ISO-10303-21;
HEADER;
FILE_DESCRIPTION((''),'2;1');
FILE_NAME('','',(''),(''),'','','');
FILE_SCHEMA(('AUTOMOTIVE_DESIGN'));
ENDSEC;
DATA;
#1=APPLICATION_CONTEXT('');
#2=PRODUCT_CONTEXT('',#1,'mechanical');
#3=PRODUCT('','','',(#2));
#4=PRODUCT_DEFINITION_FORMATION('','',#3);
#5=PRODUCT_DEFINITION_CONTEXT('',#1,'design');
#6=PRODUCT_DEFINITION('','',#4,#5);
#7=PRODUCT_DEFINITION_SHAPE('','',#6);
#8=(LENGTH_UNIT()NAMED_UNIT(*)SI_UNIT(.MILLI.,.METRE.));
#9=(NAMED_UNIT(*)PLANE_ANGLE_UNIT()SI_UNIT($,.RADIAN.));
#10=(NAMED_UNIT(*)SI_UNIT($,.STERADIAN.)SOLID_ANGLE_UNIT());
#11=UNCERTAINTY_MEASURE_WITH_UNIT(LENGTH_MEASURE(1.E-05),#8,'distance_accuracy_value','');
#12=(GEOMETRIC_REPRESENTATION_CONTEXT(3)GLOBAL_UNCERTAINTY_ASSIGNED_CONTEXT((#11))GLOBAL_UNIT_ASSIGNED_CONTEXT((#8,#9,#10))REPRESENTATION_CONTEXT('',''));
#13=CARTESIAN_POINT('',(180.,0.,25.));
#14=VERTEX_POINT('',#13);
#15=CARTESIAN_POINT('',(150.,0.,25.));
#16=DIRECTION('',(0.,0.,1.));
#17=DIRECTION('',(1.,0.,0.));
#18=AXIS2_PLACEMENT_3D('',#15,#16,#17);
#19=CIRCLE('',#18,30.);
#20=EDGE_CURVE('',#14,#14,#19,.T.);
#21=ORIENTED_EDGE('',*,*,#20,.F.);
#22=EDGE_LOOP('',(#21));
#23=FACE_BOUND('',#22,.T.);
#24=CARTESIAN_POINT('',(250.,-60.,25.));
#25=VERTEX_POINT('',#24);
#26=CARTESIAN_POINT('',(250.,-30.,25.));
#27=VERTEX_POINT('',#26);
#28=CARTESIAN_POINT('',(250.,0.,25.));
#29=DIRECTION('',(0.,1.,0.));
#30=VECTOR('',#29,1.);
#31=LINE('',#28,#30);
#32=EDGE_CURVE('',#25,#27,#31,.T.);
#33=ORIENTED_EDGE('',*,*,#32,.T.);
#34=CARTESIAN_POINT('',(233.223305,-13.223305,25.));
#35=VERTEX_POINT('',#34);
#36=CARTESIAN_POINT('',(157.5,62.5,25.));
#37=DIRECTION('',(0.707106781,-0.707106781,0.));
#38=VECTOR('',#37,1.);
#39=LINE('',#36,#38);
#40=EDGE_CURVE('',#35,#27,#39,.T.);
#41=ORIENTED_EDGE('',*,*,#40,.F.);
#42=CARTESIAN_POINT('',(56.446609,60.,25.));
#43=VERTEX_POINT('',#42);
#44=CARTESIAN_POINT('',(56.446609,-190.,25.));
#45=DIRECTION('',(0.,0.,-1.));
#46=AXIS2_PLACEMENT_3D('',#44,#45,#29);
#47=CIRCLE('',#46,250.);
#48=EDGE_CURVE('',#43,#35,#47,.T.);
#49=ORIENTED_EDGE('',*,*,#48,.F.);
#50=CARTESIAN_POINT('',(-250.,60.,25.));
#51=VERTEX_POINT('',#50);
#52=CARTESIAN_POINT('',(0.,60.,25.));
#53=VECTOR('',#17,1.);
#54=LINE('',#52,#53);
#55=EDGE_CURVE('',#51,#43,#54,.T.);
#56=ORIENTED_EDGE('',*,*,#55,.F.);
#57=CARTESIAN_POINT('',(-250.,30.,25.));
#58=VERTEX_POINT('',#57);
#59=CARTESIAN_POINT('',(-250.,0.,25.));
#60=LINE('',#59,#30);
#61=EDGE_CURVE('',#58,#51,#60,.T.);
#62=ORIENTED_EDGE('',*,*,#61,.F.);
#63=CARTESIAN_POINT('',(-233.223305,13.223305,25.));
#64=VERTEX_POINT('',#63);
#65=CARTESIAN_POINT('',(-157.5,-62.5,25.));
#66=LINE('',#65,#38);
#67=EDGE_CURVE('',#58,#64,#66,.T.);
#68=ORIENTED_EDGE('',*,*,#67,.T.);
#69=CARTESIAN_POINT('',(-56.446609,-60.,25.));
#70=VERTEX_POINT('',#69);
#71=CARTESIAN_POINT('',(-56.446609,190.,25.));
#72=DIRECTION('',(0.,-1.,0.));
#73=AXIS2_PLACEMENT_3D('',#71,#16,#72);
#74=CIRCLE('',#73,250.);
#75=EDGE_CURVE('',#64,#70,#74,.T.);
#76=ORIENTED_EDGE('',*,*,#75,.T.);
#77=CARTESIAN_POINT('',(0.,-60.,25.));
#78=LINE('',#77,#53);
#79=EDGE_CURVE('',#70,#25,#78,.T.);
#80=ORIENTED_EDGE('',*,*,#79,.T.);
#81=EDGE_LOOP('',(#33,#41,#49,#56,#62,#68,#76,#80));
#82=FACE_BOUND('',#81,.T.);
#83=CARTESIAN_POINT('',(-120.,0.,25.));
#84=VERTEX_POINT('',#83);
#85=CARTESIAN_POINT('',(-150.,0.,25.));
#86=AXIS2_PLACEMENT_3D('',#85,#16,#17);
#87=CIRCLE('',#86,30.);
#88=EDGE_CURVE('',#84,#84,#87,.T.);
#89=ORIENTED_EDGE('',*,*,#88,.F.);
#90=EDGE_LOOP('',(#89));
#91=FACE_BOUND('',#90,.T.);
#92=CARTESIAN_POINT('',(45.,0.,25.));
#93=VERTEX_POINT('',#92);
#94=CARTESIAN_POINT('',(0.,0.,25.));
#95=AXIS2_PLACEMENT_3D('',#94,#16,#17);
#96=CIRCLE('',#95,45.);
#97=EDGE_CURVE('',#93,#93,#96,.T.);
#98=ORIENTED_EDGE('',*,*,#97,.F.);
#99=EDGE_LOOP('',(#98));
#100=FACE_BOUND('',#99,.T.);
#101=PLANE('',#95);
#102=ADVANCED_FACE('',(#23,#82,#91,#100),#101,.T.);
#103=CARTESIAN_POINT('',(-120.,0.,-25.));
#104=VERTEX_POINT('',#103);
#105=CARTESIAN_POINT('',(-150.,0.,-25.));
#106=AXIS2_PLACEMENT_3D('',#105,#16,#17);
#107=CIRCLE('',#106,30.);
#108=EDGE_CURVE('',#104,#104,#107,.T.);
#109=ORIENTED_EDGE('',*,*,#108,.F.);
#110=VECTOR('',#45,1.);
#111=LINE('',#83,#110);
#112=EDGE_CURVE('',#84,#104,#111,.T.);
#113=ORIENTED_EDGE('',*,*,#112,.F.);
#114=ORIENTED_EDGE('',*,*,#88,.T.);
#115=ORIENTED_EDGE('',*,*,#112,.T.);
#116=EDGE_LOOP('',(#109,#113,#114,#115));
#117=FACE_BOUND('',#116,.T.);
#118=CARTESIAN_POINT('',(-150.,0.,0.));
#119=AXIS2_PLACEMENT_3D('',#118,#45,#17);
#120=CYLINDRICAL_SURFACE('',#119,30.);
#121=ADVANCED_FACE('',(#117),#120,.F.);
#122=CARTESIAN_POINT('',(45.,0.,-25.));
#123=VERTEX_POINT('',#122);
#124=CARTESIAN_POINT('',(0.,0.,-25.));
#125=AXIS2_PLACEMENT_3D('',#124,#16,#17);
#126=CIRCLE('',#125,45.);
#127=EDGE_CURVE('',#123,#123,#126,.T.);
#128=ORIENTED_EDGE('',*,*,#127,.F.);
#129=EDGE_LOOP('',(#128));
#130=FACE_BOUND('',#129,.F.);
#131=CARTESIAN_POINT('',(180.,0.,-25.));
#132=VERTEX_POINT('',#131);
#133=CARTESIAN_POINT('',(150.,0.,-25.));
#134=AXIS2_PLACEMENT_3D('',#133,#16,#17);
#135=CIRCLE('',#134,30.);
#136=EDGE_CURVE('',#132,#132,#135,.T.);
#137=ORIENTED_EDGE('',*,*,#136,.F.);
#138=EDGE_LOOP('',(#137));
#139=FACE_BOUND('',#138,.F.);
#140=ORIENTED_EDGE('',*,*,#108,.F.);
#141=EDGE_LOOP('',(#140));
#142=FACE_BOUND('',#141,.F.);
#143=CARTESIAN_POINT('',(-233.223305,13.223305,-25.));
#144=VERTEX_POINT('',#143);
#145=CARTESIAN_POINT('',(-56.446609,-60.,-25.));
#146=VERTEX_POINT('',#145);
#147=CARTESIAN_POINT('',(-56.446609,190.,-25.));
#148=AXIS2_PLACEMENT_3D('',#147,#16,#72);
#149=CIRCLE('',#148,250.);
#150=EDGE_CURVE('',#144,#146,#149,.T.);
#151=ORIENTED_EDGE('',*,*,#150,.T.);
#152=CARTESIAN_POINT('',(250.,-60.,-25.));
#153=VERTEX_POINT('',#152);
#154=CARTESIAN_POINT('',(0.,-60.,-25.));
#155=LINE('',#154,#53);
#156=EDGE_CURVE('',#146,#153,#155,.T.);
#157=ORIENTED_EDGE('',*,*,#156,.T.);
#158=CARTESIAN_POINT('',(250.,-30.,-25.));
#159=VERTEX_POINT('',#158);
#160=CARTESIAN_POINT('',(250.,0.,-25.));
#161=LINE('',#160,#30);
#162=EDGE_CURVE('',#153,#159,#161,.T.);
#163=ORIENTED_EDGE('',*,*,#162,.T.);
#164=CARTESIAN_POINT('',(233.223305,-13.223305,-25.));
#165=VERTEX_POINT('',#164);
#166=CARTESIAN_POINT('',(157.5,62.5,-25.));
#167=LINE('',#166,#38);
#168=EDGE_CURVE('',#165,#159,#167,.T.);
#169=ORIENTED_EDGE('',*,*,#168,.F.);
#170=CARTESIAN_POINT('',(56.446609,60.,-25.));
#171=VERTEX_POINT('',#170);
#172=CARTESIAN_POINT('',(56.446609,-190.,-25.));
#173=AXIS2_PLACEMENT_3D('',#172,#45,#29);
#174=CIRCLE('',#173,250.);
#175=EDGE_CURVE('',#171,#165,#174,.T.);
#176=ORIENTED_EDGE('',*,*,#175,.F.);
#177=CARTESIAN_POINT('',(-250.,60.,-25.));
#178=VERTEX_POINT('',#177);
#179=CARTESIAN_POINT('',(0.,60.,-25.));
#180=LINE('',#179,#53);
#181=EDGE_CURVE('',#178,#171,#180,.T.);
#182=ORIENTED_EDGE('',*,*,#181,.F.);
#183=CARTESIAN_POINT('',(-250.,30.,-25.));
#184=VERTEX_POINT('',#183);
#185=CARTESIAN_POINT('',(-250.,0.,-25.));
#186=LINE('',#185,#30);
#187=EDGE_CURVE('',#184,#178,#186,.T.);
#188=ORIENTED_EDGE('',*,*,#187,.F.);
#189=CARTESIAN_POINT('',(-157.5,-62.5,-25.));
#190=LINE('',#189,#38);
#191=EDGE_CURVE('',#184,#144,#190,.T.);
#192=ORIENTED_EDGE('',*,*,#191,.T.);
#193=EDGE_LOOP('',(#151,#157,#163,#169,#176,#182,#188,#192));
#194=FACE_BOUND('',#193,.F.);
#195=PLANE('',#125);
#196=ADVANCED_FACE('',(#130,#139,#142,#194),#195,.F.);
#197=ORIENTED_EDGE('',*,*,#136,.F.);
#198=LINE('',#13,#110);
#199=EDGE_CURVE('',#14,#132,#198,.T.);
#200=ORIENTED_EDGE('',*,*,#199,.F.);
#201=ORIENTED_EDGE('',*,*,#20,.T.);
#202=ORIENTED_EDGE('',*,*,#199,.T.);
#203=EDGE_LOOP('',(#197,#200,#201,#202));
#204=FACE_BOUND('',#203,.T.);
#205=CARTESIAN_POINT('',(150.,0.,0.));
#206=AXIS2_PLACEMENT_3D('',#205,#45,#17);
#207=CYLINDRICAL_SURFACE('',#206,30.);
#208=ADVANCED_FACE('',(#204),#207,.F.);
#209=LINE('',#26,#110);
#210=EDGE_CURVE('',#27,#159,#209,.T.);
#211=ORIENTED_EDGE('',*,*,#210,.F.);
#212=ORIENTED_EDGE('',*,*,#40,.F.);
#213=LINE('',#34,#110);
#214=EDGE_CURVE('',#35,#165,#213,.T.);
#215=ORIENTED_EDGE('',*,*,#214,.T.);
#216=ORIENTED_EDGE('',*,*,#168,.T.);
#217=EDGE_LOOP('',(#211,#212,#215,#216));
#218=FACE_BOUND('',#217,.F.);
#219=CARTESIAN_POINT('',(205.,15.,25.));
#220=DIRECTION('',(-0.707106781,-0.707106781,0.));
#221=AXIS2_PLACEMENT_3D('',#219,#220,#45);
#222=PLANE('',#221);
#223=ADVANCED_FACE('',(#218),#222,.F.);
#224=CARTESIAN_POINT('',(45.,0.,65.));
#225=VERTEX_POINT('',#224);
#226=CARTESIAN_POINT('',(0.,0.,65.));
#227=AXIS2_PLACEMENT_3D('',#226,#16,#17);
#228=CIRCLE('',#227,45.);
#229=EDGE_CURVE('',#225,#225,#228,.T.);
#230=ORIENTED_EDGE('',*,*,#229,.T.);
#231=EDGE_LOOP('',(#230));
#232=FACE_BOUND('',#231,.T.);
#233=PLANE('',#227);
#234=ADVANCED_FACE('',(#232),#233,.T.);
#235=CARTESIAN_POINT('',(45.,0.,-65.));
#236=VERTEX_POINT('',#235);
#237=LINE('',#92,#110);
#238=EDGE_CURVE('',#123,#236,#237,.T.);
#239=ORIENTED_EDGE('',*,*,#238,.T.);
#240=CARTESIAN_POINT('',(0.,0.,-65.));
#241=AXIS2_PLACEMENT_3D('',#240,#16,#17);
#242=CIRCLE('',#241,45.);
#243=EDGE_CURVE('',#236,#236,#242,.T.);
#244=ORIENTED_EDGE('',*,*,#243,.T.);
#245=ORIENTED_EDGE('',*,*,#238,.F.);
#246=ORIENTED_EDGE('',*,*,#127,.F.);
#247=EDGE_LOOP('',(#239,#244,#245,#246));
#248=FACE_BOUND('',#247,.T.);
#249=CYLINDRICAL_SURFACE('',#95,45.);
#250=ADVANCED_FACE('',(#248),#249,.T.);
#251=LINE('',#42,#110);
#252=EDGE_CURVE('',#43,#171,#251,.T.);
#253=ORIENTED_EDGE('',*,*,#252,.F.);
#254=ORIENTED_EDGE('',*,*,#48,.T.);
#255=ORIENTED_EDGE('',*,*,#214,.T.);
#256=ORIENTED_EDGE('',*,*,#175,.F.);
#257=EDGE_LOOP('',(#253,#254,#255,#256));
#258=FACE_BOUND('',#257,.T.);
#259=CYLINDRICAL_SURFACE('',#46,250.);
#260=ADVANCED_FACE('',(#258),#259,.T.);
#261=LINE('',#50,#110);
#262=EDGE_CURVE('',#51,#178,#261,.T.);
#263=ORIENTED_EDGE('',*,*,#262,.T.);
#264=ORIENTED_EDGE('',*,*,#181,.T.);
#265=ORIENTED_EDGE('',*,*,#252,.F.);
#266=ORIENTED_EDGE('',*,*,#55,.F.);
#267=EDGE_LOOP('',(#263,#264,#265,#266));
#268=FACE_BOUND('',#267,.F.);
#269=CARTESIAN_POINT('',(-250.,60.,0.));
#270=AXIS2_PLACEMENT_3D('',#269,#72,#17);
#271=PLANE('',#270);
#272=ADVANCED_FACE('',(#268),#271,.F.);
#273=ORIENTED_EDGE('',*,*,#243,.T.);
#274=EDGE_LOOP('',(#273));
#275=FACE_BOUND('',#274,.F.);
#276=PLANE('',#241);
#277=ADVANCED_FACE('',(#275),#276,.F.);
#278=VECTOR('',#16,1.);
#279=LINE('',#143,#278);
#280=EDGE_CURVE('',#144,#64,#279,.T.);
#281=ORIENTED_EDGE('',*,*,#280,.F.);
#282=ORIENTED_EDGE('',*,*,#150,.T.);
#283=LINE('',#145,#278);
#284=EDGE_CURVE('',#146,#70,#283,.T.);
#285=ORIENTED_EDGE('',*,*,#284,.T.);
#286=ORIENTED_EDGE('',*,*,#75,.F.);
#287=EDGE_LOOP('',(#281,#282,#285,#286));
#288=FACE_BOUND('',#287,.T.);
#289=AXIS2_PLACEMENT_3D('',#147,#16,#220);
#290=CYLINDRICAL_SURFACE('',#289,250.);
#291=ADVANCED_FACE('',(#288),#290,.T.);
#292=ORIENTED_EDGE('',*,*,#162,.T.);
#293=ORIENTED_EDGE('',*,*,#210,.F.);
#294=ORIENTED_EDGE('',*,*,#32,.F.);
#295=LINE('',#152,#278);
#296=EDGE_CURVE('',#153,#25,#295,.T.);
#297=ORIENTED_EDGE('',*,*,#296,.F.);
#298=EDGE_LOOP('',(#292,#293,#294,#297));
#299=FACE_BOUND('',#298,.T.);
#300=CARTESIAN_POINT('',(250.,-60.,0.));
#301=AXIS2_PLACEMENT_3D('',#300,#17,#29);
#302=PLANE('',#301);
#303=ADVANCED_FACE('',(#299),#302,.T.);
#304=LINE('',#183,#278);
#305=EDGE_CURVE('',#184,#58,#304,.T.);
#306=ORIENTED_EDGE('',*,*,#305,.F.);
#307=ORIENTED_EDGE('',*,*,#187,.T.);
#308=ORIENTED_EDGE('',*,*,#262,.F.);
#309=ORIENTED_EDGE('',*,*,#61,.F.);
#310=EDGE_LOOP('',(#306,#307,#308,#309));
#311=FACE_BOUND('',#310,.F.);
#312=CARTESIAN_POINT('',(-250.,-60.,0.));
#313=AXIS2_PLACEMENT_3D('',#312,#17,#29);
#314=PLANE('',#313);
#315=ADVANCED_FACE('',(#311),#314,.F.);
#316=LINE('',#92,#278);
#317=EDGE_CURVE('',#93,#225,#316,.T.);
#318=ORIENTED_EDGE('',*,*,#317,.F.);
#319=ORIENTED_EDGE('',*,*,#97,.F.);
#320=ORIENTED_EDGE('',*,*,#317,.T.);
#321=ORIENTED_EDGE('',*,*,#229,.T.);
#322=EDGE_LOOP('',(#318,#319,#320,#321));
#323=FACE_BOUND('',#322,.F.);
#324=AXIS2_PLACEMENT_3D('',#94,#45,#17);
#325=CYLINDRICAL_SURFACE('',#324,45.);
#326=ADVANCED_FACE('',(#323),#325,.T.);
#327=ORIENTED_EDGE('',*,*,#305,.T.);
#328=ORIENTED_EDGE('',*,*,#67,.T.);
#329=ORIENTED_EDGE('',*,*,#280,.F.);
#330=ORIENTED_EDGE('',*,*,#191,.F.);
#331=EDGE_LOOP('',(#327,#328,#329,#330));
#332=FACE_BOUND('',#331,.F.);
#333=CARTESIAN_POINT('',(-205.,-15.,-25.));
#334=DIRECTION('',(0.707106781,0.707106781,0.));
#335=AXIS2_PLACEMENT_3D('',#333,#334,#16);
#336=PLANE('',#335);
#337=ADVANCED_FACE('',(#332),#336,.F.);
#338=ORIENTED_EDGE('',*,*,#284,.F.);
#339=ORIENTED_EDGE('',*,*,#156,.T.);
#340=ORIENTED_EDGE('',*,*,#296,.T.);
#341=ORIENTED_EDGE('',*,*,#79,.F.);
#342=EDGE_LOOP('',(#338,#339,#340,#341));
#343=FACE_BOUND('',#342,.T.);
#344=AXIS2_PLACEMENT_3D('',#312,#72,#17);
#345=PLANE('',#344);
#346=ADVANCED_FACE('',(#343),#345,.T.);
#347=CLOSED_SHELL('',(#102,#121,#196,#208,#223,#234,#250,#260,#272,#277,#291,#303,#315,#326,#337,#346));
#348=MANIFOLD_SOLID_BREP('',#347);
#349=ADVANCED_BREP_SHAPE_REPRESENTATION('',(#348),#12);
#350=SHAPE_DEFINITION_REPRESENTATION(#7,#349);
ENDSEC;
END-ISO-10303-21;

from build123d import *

# Parameters (mm, degrees)
F0_W          = 500
F0_H          = 120
F0_R          = 30
F1_DEPTH      = 25
F2_R          = 45
F3_DEPTH      = 40
F3_DEPTH_BACK = 90
F4_SIZE       = 90
F5_R          = 250


with BuildPart() as f1:
    # F0 (on Top) → F1 (new body, symmetric)
    with BuildSketch(Plane.XY):
        Rectangle(F0_W, F0_H)
        with Locations((-150, 0)):
            Circle(F0_R, mode=Mode.SUBTRACT)
        with Locations((150, 0)):
            Circle(F0_R, mode=Mode.SUBTRACT)
    extrude(amount=F1_DEPTH, both=True)

    # F2 (on face) → F3 (join, two sides)
    with BuildSketch(Plane.XY.offset(25)) as f3_sk:
        Circle(F2_R)
    extrude(amount=F3_DEPTH)
    extrude(f3_sk.sketch, amount=-F3_DEPTH_BACK)

    # F4
    f4_edges = [f1.edges().sort_by_distance(p)[0] for p in [
        (-250, -60, 0),
        (250, 60, 0),
    ]]
    chamfer(f4_edges, length=F4_SIZE)

    # F5
    f5_edges = [f1.edges().sort_by_distance(p)[0] for p in [
        (-160, -60, 0),
        (160, 60, 0),
    ]]
    fillet(f5_edges, radius=F5_R)


solid = f1.part
